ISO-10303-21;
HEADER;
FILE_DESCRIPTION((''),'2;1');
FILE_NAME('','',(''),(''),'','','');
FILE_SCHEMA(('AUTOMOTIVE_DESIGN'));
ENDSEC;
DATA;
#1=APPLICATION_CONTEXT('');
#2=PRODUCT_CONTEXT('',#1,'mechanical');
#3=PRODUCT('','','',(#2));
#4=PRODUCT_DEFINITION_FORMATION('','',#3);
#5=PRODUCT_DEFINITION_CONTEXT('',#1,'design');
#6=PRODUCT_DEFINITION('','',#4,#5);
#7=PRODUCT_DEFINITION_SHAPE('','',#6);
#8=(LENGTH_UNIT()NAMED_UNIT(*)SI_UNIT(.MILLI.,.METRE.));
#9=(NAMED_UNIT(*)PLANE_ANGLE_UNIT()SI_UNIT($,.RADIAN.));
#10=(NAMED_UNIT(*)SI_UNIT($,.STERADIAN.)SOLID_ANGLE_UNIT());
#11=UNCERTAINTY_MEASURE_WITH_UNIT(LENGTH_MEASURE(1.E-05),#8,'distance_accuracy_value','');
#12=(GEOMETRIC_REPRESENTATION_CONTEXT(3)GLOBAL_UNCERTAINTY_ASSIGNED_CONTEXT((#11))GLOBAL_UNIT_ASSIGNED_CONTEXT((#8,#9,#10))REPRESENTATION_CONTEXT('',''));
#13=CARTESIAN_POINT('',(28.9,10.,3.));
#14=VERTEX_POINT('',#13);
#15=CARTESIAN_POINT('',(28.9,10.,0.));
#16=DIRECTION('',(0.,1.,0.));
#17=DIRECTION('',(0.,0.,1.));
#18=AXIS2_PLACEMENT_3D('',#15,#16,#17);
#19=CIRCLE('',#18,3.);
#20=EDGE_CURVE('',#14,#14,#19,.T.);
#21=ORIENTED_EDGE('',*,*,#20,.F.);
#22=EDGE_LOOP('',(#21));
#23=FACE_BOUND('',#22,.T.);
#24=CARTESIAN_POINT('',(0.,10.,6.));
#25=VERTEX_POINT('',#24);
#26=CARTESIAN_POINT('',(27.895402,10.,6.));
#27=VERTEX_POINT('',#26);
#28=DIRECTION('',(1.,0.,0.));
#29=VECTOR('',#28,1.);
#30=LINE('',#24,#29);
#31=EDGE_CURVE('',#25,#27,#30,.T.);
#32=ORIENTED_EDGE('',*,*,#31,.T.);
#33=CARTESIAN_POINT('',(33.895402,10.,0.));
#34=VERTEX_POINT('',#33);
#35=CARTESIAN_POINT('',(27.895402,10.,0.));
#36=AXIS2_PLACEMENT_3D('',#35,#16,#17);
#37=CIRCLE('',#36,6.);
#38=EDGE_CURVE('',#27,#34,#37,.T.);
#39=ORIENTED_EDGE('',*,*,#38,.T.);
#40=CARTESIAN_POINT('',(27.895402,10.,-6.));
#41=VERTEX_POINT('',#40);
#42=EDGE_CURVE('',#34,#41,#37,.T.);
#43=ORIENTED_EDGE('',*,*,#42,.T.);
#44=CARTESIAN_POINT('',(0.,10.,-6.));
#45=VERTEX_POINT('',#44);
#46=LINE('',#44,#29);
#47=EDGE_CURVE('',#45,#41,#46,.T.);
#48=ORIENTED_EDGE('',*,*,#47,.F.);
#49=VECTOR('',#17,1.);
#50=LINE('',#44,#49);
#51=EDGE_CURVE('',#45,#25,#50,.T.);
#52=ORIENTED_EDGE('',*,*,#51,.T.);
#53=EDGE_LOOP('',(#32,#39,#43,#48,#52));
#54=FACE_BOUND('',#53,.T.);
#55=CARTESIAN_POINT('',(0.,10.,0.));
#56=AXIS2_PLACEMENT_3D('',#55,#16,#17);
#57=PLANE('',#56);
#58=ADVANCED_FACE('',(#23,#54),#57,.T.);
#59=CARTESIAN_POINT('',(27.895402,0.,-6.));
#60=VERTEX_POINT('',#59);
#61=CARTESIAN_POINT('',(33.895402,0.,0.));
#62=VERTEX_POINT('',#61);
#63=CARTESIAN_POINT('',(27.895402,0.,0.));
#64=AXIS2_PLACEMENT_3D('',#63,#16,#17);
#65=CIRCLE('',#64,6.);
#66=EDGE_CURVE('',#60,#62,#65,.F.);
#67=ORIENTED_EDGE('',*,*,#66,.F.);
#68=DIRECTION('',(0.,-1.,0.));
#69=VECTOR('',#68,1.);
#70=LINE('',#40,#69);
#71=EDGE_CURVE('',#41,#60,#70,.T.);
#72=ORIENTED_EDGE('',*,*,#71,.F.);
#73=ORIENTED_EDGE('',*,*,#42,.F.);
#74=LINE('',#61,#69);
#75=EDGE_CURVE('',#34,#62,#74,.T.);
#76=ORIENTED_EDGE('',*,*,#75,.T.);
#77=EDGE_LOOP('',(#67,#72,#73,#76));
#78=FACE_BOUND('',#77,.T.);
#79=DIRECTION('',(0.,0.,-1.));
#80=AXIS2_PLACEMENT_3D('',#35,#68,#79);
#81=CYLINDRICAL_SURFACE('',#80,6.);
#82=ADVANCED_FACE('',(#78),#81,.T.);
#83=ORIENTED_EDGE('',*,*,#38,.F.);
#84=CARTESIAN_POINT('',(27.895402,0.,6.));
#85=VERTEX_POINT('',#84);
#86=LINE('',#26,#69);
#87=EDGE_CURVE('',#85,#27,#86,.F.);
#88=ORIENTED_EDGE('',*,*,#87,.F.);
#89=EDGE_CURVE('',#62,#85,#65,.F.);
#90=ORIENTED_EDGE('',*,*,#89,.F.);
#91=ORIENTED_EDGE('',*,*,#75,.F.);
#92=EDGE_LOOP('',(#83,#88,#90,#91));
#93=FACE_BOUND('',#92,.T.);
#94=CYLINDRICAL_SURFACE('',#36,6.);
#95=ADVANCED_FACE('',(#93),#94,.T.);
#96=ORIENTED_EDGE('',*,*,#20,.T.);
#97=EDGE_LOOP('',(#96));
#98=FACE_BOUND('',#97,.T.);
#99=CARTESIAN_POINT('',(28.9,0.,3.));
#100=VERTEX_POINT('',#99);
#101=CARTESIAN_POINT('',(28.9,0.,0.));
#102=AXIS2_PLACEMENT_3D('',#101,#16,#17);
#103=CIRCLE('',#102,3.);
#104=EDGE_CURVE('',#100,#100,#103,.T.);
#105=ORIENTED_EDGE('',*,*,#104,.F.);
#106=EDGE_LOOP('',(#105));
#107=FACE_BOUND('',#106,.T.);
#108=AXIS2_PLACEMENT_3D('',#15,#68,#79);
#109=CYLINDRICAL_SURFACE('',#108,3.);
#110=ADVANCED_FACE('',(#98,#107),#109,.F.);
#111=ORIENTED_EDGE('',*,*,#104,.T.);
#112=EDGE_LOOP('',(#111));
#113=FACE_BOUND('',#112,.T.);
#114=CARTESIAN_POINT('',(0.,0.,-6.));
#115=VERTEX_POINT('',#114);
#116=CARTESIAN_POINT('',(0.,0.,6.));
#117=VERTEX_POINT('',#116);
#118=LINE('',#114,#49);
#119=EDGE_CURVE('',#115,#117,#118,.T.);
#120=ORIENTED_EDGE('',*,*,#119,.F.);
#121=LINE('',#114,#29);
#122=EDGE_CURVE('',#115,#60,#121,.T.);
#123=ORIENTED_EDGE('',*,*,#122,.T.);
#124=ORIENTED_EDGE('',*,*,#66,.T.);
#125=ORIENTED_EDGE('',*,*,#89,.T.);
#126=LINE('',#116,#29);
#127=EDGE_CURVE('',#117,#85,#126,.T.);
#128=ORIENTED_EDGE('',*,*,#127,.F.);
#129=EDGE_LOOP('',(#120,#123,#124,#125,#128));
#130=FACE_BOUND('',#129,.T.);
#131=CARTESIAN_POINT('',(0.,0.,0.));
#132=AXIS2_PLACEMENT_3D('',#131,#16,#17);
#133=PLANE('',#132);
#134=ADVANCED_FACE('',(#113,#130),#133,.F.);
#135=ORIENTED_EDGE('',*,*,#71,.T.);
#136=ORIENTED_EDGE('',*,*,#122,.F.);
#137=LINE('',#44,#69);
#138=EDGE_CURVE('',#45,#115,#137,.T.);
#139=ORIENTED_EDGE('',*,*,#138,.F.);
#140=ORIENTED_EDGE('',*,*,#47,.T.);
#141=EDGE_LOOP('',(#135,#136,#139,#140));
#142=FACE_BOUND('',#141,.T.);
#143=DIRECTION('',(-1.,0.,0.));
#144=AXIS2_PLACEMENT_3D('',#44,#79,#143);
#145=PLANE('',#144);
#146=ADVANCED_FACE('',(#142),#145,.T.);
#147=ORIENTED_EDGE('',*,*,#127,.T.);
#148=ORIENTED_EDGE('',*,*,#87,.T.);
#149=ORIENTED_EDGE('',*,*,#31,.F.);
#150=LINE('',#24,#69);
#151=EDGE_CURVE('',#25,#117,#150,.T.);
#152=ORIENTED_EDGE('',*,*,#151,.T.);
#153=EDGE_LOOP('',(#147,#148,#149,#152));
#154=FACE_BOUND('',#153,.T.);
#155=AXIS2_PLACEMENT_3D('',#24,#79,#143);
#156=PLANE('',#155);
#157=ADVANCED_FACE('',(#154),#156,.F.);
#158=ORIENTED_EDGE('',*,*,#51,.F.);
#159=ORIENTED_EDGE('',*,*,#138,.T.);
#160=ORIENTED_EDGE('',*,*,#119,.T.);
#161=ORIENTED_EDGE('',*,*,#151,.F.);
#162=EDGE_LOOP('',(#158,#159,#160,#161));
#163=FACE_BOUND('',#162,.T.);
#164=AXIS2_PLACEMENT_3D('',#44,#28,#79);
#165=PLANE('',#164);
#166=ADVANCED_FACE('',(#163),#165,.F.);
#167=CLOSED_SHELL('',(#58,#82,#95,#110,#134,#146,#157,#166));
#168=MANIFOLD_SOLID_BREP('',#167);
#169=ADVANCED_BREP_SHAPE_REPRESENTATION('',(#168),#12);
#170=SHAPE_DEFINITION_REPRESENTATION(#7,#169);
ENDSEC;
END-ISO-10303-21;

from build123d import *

# Parameters (mm, degrees)
SKETCH1_W           = 33.895402138
SKETCH1_H           = 12
SKETCH1_R           = 3
BOSS_EXTRUDE1_DEPTH = 10
FILLET1_R           = 6


with BuildPart() as part:
    # Sketch1 → Boss-Extrude1 (new body)
    with BuildSketch(Plane(origin=(0, 0, 0), x_dir=(1, 0, 0), z_dir=(0, 1, 0))):
        with Locations((16.947701069, 0)):
            Rectangle(SKETCH1_W, SKETCH1_H)
        with Locations(Location((28.9, 0, 0), (0, 0, 270))):
            Circle(SKETCH1_R, mode=Mode.SUBTRACT)
    extrude(amount=BOSS_EXTRUDE1_DEPTH)

    # Fillet1
    fillet1_edges = [part.edges().sort_by_distance(p)[0] for p in [
        (33.895402138, 5, -6),
        (33.895402138, 5, 6),
    ]]
    fillet(fillet1_edges, radius=FILLET1_R - 0.0001)  # a hair under: the kernel refuses the full size


solid = part.part
